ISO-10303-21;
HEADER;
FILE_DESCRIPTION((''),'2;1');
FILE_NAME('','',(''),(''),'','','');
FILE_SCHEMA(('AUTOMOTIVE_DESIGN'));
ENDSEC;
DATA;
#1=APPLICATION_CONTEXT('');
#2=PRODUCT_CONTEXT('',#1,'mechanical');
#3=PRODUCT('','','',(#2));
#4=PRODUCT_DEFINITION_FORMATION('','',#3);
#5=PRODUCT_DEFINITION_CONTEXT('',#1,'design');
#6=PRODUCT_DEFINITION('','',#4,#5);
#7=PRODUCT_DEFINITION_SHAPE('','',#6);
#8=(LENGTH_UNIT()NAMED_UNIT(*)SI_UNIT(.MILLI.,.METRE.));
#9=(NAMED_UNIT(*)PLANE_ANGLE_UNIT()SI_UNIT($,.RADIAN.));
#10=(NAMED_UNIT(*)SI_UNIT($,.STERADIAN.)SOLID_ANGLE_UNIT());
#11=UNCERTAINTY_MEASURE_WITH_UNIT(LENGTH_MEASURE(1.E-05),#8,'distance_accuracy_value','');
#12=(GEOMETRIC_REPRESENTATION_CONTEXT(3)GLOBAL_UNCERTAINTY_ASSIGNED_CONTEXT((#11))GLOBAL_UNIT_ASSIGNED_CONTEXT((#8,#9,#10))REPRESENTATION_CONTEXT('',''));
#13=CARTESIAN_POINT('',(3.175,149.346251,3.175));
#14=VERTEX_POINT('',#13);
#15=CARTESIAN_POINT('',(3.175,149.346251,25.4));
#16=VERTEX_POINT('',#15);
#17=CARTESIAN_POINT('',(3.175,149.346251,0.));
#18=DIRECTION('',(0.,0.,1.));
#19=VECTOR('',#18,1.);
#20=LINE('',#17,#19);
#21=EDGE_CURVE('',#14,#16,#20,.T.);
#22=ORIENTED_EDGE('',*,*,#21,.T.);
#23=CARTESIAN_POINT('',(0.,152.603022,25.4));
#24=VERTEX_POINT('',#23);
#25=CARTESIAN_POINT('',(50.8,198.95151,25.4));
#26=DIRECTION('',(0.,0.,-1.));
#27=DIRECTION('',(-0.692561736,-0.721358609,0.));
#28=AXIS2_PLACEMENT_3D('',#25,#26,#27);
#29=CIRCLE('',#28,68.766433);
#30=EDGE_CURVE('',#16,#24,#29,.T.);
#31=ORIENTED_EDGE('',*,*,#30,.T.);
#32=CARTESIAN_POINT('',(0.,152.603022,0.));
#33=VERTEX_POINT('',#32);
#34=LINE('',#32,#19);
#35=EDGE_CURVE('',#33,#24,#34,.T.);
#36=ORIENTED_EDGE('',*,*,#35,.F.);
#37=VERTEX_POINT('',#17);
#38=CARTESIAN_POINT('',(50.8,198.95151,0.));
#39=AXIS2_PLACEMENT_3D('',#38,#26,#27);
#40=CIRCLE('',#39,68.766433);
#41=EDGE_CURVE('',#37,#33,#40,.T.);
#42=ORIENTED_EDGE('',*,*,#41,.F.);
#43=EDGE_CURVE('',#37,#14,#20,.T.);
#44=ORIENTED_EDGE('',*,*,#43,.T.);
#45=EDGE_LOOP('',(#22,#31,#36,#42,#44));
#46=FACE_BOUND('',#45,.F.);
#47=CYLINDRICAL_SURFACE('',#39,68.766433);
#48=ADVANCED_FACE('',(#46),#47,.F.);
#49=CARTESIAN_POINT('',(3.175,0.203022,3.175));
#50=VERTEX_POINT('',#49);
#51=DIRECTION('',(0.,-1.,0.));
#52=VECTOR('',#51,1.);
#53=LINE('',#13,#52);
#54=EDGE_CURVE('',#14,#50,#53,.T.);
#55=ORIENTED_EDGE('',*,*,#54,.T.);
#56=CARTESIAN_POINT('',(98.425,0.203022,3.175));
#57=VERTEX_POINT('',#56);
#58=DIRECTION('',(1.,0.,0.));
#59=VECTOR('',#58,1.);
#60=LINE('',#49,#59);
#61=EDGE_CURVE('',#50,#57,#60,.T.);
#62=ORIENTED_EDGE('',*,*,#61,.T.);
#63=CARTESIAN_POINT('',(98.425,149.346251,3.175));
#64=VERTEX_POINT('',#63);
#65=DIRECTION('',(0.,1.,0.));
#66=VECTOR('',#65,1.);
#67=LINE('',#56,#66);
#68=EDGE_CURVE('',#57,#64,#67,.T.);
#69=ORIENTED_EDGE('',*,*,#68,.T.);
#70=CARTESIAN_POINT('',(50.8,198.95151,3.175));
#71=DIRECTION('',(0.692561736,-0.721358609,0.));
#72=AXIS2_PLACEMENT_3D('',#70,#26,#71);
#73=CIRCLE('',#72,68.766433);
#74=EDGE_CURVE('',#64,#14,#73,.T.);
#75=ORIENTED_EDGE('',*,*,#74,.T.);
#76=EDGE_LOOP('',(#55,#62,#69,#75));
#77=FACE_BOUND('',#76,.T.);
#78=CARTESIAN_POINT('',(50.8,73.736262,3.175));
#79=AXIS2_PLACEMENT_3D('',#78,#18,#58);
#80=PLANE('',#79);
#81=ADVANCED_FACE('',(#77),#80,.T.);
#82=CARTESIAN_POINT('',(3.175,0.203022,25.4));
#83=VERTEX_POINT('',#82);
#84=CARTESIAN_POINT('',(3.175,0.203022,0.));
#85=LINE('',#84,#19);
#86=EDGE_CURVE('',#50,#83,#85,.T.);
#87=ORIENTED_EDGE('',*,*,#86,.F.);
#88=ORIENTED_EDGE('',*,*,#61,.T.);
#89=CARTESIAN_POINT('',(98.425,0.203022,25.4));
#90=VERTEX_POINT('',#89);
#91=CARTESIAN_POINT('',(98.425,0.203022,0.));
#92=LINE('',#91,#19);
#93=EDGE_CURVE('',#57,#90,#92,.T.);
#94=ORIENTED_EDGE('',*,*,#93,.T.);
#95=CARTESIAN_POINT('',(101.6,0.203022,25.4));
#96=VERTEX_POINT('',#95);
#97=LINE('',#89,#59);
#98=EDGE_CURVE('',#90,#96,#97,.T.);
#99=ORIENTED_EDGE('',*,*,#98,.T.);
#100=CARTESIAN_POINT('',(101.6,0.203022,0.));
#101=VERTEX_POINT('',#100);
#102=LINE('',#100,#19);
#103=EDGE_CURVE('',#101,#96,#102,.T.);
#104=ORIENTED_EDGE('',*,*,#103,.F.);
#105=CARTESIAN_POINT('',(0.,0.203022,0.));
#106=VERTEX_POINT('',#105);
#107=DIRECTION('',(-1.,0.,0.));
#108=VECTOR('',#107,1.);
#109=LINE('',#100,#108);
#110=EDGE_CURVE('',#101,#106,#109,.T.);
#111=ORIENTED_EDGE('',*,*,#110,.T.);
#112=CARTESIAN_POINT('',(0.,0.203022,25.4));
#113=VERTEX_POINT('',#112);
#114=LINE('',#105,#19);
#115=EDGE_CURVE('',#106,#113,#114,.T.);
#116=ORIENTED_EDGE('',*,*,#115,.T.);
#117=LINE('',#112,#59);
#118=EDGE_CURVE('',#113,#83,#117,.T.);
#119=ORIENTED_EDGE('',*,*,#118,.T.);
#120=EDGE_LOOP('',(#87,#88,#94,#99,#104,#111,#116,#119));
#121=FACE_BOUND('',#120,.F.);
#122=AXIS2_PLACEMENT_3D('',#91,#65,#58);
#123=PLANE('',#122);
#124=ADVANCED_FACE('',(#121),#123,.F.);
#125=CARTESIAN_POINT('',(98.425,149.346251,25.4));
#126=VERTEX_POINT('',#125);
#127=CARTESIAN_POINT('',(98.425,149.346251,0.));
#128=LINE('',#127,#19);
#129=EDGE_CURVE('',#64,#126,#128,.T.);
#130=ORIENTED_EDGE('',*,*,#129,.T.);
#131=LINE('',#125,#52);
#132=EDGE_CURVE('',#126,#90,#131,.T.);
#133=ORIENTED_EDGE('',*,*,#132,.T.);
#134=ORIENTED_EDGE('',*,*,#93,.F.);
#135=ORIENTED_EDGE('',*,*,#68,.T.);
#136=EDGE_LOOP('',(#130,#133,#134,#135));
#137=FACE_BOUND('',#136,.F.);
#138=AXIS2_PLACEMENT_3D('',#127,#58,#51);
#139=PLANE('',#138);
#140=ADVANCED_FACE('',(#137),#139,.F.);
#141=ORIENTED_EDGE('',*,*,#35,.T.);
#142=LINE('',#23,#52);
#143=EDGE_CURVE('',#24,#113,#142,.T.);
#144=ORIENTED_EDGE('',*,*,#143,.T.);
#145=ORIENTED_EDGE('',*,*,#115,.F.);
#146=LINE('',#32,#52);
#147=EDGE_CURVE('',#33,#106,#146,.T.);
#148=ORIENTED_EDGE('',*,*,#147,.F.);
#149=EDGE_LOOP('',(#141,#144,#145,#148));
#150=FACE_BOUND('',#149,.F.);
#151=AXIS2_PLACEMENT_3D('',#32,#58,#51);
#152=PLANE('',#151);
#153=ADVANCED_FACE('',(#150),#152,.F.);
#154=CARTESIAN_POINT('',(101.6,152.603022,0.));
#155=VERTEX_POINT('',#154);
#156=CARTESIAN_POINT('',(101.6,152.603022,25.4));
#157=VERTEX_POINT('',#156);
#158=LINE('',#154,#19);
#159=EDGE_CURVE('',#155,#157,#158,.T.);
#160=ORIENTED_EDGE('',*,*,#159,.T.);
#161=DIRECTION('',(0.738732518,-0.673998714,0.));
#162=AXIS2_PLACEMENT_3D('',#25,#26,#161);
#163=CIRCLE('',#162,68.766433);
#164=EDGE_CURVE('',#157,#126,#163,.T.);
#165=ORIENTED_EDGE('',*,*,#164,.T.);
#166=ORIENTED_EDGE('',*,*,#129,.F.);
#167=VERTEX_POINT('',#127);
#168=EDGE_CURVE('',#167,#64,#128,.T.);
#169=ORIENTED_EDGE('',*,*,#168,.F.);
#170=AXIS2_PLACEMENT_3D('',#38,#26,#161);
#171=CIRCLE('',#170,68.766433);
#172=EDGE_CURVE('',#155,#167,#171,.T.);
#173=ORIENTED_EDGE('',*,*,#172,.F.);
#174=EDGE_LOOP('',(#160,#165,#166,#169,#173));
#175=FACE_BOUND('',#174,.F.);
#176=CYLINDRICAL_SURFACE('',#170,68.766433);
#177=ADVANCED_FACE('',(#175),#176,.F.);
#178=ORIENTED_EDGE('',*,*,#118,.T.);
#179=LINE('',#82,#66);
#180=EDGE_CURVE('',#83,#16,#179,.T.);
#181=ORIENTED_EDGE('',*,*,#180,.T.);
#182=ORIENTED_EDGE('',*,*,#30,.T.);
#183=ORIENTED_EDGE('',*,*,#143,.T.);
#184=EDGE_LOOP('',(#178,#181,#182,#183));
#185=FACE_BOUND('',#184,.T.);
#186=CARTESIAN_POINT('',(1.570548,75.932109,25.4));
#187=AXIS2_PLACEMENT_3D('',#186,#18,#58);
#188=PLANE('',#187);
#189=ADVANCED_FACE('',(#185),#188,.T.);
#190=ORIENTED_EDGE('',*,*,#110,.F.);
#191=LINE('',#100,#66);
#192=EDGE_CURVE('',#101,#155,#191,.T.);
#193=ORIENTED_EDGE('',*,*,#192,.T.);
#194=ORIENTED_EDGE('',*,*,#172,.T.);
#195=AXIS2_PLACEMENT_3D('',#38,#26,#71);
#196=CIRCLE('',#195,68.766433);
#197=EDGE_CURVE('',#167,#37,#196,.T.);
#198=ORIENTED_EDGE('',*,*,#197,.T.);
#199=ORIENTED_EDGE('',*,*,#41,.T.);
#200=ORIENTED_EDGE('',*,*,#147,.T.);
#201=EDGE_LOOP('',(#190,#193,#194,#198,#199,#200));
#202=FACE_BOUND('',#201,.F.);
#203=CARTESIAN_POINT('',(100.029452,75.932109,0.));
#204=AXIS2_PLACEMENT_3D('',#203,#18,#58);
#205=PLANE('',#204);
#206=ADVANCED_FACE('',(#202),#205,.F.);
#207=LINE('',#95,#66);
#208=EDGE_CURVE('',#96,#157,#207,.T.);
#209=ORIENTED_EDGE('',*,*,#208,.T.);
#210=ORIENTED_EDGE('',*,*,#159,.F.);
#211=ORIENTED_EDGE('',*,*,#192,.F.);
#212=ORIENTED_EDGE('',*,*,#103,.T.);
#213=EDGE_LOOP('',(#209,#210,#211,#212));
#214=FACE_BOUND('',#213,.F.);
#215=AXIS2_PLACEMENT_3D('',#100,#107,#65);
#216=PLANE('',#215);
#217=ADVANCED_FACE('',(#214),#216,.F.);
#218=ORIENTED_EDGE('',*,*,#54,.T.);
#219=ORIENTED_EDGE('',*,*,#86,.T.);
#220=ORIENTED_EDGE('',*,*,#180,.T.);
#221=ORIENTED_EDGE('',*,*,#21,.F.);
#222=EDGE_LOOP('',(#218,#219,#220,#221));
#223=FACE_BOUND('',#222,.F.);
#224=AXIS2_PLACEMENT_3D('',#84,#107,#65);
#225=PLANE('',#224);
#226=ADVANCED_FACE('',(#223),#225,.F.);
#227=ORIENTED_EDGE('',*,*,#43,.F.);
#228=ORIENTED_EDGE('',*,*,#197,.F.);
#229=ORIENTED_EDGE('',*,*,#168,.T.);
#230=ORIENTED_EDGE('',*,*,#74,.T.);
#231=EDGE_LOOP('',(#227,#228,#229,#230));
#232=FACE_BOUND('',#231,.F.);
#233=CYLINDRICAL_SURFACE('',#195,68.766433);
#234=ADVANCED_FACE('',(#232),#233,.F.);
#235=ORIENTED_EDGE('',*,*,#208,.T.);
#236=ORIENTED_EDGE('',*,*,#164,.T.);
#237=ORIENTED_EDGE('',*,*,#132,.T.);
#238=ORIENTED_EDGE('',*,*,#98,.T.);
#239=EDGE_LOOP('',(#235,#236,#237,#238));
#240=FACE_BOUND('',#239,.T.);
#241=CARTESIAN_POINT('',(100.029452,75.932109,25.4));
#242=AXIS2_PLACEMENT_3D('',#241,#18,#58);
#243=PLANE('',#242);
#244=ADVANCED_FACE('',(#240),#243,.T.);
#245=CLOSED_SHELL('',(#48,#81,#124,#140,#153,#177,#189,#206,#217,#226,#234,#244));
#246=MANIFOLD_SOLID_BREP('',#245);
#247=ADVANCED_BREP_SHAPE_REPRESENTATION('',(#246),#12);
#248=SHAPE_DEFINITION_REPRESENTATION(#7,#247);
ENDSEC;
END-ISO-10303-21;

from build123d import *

# Parameters (mm, degrees)
F1_DEPTH = 3.175
F2_DEPTH = 25.4
F3_DEPTH = 25.4


with BuildPart() as f1:
    # F0 (on Top) → F1 (new body)
    with BuildSketch(Plane.XY):
        with BuildLine():
            ThreePointArc((98.425, 149.3462514694), (50.8, 130.1850769842), (3.175, 149.3462514694))
            Line((3.175, 149.3462514694), (3.175, 3.3780224621))
            Line((3.175, 3.3780224621), (3.175, 0.2030224621))
            Line((3.175, 0.2030224621), (98.425, 0.2030224621))
            Line((98.425, 0.2030224621), (98.425, 3.3780224621))
            Line((98.425, 3.3780224621), (98.425, 149.3462514694))
        make_face()
    extrude(amount=F1_DEPTH)

    # F0 (on Top) → F2 (join)
    with BuildSketch(Plane.XY):
        with BuildLine():
            ThreePointArc((3.175, 149.3462514694), (1.5605666607, 150.9483798686), (0, 152.6030224621))
            Line((0, 152.6030224621), (0, 0.2030224621))
            Line((0, 0.2030224621), (3.175, 0.2030224621))
            Line((3.175, 0.2030224621), (3.175, 3.3780224621))
            Line((3.175, 3.3780224621), (3.175, 149.3462514694))
        make_face()
    extrude(amount=F2_DEPTH)

    # F0 (on Top) → F3 (join)
    with BuildSketch(Plane.XY):
        with BuildLine():
            ThreePointArc((101.6, 152.6030224621), (100.0394333393, 150.9483798686), (98.425, 149.3462514694))
            Line((98.425, 149.3462514694), (98.425, 3.3780224621))
            Line((98.425, 3.3780224621), (98.425, 0.2030224621))
            Line((98.425, 0.2030224621), (101.6, 0.2030224621))
            Line((101.6, 0.2030224621), (101.6, 152.6030224621))
        make_face()
    extrude(amount=F3_DEPTH)


solid = f1.part
